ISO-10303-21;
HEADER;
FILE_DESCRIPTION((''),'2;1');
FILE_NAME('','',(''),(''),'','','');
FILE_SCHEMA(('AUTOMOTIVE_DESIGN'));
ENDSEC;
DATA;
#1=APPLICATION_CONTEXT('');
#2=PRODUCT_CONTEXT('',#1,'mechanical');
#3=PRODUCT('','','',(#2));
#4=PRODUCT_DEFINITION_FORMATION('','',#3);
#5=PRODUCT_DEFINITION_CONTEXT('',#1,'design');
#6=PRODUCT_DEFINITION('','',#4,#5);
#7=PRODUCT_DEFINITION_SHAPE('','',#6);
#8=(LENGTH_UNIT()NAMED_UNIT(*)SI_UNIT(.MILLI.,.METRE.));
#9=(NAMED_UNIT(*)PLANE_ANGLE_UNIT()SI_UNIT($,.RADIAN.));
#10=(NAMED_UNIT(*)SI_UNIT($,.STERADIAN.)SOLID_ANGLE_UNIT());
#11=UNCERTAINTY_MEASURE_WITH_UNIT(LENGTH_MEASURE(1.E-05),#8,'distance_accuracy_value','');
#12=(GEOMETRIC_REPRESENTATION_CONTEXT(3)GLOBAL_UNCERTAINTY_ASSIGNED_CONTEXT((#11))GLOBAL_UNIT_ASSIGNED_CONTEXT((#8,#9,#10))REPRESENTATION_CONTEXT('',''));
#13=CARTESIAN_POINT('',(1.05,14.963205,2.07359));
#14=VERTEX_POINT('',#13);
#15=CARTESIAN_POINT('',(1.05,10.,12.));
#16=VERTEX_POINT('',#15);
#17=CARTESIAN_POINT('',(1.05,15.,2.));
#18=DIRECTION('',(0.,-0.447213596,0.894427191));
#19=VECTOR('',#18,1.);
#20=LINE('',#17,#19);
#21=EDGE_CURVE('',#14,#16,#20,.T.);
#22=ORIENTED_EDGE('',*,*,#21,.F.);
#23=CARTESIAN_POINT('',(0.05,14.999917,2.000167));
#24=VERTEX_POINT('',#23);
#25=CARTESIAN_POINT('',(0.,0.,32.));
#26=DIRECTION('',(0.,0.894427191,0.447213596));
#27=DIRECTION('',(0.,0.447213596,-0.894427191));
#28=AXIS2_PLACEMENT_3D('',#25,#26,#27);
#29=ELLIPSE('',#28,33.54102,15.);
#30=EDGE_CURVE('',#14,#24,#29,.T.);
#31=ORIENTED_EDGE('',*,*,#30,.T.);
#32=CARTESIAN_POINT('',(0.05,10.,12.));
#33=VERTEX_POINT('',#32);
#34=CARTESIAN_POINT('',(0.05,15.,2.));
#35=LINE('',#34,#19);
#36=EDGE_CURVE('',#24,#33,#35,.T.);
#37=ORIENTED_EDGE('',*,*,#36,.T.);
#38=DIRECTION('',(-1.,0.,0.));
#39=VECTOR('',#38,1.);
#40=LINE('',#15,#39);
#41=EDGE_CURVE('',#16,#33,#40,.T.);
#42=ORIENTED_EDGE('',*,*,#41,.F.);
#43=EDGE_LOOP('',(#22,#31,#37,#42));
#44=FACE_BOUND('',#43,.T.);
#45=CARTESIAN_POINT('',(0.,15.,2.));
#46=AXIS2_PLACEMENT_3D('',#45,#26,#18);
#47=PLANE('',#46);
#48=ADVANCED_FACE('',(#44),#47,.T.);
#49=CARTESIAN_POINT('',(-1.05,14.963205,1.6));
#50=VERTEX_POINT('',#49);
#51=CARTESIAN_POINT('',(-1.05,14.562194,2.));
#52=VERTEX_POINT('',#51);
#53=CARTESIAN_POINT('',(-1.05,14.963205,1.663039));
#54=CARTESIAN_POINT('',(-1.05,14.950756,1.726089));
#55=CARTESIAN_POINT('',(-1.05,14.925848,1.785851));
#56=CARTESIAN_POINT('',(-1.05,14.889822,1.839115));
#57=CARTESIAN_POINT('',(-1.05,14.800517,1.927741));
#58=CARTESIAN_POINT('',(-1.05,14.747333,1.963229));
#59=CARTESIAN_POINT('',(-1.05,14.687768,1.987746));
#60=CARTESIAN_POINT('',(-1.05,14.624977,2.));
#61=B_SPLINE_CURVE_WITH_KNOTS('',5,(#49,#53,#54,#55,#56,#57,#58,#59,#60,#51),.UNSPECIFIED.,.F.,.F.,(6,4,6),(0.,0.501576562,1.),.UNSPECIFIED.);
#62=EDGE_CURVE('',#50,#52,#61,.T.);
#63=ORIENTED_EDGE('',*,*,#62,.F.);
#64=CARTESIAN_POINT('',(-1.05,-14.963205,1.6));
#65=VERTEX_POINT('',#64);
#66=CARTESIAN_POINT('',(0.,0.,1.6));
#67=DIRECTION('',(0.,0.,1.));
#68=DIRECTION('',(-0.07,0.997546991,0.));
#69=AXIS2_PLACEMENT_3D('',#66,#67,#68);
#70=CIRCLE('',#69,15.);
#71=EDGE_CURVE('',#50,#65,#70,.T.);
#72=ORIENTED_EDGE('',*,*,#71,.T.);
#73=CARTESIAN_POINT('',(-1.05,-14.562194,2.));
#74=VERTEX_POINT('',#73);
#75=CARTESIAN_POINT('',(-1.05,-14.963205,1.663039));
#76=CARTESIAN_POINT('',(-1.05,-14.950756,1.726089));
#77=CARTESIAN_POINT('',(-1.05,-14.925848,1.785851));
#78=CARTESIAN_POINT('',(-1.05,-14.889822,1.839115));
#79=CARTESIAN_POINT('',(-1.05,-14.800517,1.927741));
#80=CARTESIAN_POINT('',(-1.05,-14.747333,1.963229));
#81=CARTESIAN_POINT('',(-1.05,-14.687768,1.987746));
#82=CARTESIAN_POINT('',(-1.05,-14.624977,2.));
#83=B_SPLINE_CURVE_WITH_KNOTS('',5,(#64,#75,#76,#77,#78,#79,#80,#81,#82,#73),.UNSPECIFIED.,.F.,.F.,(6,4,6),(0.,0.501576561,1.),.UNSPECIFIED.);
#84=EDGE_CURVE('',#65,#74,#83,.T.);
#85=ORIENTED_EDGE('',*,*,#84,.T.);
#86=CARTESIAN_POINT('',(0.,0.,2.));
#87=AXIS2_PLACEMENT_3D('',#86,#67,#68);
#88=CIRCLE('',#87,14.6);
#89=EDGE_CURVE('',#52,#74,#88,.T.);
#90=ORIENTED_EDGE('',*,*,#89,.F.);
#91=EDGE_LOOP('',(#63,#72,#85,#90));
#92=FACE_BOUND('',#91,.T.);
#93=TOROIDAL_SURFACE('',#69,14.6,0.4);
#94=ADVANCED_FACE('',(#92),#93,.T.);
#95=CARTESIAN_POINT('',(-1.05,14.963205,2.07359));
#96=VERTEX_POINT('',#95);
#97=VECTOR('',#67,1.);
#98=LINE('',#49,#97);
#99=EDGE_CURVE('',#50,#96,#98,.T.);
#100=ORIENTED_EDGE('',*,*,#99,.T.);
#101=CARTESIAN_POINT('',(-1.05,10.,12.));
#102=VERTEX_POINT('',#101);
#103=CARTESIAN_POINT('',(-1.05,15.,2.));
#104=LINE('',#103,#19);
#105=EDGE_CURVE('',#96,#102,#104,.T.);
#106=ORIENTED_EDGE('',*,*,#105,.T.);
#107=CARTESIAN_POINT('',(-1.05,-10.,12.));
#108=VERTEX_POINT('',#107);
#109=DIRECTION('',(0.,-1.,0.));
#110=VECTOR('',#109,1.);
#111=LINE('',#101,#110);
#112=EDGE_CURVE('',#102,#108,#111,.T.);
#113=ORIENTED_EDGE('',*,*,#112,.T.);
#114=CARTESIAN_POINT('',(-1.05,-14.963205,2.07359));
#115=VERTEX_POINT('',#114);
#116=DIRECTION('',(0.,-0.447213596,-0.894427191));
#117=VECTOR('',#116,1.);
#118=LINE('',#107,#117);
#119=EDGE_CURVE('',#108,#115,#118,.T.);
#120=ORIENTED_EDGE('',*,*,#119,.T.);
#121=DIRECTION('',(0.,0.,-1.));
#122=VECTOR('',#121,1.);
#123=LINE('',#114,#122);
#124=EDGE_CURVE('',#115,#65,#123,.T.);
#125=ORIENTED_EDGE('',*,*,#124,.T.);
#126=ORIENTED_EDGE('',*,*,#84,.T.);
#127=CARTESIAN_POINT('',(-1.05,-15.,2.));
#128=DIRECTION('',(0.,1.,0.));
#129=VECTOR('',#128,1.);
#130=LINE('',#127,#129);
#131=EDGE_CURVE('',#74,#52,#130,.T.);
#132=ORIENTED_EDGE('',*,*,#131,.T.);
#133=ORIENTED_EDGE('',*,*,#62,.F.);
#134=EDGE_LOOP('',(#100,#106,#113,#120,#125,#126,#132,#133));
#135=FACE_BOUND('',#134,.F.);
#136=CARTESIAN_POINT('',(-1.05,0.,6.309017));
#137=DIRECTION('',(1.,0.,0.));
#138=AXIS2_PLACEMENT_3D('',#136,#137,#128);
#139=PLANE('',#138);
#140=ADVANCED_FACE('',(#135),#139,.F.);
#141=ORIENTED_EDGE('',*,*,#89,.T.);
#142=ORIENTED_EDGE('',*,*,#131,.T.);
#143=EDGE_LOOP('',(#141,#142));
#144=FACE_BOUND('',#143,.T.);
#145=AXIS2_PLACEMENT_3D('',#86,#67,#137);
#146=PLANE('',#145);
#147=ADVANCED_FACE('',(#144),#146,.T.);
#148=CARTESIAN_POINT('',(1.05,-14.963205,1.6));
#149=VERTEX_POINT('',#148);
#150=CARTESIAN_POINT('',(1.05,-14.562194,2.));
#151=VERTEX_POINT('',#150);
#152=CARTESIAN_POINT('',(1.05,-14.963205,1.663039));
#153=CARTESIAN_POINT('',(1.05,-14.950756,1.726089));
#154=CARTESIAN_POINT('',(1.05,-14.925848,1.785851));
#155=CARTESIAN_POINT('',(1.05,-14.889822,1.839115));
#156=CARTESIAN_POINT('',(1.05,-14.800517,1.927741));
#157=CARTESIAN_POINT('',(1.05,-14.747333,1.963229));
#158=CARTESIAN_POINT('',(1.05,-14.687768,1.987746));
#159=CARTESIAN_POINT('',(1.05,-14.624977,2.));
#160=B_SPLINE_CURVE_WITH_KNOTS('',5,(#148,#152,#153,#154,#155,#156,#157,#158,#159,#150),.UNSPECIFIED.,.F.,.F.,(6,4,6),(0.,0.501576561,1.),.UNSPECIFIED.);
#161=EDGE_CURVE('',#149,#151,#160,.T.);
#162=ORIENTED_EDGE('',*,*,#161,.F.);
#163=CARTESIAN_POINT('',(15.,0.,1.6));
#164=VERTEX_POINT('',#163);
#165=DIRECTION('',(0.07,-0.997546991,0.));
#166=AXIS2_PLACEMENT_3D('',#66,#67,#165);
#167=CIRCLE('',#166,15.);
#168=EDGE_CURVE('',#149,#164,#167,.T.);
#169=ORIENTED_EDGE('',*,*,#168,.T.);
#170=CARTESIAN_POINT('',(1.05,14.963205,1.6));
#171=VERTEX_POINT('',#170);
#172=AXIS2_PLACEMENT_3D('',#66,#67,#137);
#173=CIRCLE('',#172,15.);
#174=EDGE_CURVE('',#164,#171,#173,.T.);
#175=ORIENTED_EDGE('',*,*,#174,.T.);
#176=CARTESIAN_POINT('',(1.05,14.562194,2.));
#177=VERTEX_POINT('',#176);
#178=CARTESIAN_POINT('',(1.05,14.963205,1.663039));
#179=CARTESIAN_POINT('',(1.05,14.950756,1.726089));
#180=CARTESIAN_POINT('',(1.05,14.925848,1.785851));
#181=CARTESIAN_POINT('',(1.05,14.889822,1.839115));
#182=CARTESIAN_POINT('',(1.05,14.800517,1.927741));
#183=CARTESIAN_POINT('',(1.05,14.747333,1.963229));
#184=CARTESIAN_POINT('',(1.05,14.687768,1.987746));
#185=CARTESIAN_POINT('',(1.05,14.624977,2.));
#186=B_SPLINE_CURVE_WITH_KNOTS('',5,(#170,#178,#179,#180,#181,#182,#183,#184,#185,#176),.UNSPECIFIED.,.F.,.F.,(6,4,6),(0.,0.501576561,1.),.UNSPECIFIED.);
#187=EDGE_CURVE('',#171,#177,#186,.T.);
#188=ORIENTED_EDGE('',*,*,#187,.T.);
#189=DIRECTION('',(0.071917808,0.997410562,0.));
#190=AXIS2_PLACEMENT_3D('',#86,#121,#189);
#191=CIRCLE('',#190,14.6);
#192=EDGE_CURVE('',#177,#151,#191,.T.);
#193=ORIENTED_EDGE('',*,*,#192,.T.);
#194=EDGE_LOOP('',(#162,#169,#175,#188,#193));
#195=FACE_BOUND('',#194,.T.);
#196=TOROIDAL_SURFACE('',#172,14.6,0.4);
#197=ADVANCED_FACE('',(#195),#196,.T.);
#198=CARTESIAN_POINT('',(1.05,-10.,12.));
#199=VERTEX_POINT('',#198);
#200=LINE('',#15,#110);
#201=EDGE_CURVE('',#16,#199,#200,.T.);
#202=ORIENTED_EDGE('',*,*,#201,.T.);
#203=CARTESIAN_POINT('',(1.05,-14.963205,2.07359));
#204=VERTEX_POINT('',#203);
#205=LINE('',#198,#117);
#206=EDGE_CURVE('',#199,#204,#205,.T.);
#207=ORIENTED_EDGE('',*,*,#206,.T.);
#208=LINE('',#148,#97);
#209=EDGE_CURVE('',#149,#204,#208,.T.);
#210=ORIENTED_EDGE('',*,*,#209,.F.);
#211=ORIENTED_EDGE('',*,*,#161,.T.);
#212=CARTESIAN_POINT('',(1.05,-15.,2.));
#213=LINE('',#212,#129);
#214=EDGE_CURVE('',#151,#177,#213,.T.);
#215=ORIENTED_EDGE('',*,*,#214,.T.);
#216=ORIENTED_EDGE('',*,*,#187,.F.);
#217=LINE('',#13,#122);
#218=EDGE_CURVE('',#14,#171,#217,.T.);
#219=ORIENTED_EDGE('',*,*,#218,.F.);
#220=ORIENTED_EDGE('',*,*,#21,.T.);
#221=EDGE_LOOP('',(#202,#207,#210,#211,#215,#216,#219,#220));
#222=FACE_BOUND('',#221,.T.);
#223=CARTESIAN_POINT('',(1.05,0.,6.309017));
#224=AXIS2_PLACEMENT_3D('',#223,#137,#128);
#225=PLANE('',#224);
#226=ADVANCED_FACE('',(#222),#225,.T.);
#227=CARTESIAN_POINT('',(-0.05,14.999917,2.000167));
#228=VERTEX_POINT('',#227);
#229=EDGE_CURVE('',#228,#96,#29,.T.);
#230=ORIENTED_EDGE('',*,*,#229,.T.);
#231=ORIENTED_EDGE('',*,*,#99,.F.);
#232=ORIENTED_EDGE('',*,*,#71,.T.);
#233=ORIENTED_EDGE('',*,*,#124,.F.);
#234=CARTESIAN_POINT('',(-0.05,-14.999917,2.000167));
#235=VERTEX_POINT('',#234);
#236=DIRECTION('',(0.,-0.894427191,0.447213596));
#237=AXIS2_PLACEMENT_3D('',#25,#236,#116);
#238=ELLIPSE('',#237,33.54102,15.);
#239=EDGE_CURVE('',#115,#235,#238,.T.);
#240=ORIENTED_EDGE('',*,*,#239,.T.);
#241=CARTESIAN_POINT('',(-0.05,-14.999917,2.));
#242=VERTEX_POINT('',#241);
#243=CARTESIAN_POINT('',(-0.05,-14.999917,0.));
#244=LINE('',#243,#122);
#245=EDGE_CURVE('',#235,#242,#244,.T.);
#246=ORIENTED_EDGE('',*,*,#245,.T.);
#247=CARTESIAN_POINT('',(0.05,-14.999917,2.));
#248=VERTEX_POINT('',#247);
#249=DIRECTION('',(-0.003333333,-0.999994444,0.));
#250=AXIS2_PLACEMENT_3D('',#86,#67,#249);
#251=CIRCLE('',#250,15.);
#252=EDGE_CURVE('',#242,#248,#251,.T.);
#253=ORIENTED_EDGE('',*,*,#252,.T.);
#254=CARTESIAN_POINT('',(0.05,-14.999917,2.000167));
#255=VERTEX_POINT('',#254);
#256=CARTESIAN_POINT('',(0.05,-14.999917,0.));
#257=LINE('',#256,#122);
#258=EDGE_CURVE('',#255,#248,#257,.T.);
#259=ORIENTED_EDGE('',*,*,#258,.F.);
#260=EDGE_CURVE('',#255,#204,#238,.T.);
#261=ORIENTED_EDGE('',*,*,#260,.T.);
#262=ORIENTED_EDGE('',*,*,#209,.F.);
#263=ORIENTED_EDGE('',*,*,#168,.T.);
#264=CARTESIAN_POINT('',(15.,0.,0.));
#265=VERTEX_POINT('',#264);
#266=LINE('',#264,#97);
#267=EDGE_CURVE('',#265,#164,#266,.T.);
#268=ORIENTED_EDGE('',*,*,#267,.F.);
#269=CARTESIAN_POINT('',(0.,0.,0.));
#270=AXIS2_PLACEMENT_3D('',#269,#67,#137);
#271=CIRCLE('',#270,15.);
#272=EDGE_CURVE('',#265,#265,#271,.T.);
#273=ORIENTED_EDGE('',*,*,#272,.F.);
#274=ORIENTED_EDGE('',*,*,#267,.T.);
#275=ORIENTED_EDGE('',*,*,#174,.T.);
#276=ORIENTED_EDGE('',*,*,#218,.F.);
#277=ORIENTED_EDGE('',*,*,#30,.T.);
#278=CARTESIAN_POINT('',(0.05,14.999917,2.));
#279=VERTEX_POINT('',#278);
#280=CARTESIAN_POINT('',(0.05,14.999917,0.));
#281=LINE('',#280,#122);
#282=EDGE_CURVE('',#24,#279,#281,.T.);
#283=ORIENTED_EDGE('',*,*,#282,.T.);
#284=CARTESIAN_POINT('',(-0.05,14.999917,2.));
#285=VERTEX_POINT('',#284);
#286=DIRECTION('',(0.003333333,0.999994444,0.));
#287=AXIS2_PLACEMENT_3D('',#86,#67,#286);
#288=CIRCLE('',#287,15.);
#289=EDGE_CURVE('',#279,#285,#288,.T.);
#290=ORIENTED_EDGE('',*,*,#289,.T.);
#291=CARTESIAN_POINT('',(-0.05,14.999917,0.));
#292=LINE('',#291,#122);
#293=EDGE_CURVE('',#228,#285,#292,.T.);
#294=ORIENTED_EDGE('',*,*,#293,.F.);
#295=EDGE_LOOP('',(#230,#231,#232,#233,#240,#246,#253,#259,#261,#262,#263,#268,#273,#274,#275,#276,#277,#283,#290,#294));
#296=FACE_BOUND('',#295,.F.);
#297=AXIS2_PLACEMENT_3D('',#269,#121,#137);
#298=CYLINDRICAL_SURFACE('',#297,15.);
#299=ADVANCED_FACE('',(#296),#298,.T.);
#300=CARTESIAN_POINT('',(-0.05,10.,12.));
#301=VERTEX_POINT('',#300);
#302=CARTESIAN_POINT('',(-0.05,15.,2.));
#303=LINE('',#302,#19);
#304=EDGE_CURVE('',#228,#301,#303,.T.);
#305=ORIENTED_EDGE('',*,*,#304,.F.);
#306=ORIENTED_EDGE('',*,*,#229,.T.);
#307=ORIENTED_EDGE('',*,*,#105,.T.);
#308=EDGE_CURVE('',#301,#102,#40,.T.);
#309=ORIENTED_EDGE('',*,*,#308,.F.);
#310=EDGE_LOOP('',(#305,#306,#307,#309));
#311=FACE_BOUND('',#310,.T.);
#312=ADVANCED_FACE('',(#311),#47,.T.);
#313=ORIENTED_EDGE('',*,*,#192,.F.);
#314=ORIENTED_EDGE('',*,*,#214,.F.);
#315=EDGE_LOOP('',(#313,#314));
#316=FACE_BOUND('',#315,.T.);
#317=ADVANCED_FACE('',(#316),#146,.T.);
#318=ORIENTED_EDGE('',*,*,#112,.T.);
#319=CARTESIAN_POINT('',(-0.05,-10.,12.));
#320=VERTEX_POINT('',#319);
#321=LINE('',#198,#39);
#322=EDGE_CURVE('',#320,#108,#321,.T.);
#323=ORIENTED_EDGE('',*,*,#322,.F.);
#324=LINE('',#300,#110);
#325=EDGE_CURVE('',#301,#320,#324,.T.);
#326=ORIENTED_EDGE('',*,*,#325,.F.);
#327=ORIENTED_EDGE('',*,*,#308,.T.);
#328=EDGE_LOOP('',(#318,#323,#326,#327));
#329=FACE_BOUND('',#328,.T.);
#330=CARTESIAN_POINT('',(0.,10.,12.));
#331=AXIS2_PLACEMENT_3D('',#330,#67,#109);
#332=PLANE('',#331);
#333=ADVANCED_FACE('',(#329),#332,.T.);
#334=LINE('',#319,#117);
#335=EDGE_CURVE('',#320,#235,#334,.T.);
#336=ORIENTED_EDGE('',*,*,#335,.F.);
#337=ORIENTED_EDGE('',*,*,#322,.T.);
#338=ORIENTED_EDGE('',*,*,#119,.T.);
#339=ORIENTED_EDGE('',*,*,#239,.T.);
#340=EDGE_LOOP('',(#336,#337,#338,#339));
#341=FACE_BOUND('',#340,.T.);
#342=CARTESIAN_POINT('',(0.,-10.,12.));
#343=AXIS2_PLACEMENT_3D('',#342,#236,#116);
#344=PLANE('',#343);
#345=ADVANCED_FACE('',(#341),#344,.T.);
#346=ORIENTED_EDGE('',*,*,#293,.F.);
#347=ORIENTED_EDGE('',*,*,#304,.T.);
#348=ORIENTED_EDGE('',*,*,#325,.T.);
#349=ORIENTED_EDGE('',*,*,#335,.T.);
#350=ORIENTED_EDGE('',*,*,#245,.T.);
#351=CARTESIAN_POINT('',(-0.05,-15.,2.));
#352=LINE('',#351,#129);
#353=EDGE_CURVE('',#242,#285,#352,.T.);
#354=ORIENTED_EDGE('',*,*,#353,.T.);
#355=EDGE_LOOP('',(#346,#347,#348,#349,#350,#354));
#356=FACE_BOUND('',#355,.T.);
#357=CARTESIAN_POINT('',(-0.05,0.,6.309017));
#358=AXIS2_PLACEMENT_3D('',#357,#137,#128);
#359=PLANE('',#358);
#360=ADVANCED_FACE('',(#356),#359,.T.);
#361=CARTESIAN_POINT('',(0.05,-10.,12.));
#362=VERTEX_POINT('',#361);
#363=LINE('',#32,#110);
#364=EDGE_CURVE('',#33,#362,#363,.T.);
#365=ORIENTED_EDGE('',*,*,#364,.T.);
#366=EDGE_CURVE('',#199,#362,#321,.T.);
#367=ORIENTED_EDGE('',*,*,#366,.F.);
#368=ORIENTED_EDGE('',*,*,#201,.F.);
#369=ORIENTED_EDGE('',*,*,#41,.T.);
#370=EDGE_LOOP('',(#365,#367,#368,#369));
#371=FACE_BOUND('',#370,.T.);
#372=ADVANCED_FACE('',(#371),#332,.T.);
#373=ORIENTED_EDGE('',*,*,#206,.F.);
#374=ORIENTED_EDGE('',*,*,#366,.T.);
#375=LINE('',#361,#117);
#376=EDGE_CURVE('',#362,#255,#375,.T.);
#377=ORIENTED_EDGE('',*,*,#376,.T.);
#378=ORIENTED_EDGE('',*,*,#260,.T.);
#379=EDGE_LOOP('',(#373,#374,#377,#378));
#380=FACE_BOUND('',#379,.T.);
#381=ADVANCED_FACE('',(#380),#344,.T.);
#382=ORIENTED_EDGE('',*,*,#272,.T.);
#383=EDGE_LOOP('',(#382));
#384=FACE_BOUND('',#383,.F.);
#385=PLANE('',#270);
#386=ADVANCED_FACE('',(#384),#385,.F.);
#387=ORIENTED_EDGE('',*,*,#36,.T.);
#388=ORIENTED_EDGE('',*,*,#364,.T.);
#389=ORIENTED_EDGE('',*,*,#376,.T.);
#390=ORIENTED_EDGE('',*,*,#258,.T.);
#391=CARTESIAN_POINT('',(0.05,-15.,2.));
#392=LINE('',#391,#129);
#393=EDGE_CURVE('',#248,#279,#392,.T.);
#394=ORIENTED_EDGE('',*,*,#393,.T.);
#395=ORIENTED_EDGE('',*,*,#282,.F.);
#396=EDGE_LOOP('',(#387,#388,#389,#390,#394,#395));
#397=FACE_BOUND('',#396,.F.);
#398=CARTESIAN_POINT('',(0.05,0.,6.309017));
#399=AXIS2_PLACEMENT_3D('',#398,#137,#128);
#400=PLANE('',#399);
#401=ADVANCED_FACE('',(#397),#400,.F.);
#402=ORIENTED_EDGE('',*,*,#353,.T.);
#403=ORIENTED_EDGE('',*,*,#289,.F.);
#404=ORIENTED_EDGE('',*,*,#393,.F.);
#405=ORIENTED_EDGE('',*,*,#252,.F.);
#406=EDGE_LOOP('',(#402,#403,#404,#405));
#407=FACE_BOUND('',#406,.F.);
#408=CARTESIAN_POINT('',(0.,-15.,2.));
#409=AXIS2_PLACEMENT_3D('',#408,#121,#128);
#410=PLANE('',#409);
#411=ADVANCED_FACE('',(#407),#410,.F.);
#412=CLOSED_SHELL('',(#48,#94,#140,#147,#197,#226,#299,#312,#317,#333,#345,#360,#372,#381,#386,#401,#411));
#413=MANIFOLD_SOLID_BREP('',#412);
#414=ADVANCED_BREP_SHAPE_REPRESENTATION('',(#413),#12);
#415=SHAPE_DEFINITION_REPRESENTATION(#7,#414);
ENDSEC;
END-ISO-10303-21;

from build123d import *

# Parameters (mm, degrees)
F0_R     = 15
F1_DEPTH = 2
F3_DEPTH = 1.05
F4_DEPTH = 0.05
F5_F1_R  = 0.4
F5_F2_R  = 0.4
F0_R_2   = 19.9891271991
F6_DEPTH = 50


with BuildPart() as f1:
    # F0 (on Top) → F1 (new body)
    with BuildSketch(Plane.XY):
        Circle(F0_R)
    extrude(amount=F1_DEPTH)

    # F2 (on Right) → F3 (join, symmetric)
    with BuildSketch(Plane.YZ):
        Polygon((-10, 12), (-15, 2), (15, 2), (10, 12), align=None)
    extrude(amount=F3_DEPTH, both=True)

    # F2 (on Right) → F4 (cut, symmetric)
    with BuildSketch(Plane.YZ):
        Polygon((-10, 12), (-15, 2), (15, 2), (10, 12), align=None)
    extrude(amount=F4_DEPTH, both=True, mode=Mode.SUBTRACT)

    # F5: fillet of radius 0.4 on 3 edges, made by hand

    # F5_f1
    f5_f1_edges = [f1.edges().sort_by_distance(p)[0] for p in [
        (-15, 0, 2),
    ]]
    fillet(f5_f1_edges, radius=F5_F1_R)

    # F5_f2
    f5_f2_edges = [f1.edges().sort_by_distance(p)[0] for p in [
        (10.9715541287, 10.2286362727, 2),
        (10.9715541287, -10.2286362727, 2),
    ]]
    fillet(f5_f2_edges, radius=F5_F2_R)

    # F0 (on Top) → F6 (cut)
    with BuildSketch(Plane.XY):
        Circle(F0_R_2)
        Circle(F0_R, mode=Mode.SUBTRACT)
    extrude(amount=F6_DEPTH, mode=Mode.SUBTRACT)


solid = f1.part
